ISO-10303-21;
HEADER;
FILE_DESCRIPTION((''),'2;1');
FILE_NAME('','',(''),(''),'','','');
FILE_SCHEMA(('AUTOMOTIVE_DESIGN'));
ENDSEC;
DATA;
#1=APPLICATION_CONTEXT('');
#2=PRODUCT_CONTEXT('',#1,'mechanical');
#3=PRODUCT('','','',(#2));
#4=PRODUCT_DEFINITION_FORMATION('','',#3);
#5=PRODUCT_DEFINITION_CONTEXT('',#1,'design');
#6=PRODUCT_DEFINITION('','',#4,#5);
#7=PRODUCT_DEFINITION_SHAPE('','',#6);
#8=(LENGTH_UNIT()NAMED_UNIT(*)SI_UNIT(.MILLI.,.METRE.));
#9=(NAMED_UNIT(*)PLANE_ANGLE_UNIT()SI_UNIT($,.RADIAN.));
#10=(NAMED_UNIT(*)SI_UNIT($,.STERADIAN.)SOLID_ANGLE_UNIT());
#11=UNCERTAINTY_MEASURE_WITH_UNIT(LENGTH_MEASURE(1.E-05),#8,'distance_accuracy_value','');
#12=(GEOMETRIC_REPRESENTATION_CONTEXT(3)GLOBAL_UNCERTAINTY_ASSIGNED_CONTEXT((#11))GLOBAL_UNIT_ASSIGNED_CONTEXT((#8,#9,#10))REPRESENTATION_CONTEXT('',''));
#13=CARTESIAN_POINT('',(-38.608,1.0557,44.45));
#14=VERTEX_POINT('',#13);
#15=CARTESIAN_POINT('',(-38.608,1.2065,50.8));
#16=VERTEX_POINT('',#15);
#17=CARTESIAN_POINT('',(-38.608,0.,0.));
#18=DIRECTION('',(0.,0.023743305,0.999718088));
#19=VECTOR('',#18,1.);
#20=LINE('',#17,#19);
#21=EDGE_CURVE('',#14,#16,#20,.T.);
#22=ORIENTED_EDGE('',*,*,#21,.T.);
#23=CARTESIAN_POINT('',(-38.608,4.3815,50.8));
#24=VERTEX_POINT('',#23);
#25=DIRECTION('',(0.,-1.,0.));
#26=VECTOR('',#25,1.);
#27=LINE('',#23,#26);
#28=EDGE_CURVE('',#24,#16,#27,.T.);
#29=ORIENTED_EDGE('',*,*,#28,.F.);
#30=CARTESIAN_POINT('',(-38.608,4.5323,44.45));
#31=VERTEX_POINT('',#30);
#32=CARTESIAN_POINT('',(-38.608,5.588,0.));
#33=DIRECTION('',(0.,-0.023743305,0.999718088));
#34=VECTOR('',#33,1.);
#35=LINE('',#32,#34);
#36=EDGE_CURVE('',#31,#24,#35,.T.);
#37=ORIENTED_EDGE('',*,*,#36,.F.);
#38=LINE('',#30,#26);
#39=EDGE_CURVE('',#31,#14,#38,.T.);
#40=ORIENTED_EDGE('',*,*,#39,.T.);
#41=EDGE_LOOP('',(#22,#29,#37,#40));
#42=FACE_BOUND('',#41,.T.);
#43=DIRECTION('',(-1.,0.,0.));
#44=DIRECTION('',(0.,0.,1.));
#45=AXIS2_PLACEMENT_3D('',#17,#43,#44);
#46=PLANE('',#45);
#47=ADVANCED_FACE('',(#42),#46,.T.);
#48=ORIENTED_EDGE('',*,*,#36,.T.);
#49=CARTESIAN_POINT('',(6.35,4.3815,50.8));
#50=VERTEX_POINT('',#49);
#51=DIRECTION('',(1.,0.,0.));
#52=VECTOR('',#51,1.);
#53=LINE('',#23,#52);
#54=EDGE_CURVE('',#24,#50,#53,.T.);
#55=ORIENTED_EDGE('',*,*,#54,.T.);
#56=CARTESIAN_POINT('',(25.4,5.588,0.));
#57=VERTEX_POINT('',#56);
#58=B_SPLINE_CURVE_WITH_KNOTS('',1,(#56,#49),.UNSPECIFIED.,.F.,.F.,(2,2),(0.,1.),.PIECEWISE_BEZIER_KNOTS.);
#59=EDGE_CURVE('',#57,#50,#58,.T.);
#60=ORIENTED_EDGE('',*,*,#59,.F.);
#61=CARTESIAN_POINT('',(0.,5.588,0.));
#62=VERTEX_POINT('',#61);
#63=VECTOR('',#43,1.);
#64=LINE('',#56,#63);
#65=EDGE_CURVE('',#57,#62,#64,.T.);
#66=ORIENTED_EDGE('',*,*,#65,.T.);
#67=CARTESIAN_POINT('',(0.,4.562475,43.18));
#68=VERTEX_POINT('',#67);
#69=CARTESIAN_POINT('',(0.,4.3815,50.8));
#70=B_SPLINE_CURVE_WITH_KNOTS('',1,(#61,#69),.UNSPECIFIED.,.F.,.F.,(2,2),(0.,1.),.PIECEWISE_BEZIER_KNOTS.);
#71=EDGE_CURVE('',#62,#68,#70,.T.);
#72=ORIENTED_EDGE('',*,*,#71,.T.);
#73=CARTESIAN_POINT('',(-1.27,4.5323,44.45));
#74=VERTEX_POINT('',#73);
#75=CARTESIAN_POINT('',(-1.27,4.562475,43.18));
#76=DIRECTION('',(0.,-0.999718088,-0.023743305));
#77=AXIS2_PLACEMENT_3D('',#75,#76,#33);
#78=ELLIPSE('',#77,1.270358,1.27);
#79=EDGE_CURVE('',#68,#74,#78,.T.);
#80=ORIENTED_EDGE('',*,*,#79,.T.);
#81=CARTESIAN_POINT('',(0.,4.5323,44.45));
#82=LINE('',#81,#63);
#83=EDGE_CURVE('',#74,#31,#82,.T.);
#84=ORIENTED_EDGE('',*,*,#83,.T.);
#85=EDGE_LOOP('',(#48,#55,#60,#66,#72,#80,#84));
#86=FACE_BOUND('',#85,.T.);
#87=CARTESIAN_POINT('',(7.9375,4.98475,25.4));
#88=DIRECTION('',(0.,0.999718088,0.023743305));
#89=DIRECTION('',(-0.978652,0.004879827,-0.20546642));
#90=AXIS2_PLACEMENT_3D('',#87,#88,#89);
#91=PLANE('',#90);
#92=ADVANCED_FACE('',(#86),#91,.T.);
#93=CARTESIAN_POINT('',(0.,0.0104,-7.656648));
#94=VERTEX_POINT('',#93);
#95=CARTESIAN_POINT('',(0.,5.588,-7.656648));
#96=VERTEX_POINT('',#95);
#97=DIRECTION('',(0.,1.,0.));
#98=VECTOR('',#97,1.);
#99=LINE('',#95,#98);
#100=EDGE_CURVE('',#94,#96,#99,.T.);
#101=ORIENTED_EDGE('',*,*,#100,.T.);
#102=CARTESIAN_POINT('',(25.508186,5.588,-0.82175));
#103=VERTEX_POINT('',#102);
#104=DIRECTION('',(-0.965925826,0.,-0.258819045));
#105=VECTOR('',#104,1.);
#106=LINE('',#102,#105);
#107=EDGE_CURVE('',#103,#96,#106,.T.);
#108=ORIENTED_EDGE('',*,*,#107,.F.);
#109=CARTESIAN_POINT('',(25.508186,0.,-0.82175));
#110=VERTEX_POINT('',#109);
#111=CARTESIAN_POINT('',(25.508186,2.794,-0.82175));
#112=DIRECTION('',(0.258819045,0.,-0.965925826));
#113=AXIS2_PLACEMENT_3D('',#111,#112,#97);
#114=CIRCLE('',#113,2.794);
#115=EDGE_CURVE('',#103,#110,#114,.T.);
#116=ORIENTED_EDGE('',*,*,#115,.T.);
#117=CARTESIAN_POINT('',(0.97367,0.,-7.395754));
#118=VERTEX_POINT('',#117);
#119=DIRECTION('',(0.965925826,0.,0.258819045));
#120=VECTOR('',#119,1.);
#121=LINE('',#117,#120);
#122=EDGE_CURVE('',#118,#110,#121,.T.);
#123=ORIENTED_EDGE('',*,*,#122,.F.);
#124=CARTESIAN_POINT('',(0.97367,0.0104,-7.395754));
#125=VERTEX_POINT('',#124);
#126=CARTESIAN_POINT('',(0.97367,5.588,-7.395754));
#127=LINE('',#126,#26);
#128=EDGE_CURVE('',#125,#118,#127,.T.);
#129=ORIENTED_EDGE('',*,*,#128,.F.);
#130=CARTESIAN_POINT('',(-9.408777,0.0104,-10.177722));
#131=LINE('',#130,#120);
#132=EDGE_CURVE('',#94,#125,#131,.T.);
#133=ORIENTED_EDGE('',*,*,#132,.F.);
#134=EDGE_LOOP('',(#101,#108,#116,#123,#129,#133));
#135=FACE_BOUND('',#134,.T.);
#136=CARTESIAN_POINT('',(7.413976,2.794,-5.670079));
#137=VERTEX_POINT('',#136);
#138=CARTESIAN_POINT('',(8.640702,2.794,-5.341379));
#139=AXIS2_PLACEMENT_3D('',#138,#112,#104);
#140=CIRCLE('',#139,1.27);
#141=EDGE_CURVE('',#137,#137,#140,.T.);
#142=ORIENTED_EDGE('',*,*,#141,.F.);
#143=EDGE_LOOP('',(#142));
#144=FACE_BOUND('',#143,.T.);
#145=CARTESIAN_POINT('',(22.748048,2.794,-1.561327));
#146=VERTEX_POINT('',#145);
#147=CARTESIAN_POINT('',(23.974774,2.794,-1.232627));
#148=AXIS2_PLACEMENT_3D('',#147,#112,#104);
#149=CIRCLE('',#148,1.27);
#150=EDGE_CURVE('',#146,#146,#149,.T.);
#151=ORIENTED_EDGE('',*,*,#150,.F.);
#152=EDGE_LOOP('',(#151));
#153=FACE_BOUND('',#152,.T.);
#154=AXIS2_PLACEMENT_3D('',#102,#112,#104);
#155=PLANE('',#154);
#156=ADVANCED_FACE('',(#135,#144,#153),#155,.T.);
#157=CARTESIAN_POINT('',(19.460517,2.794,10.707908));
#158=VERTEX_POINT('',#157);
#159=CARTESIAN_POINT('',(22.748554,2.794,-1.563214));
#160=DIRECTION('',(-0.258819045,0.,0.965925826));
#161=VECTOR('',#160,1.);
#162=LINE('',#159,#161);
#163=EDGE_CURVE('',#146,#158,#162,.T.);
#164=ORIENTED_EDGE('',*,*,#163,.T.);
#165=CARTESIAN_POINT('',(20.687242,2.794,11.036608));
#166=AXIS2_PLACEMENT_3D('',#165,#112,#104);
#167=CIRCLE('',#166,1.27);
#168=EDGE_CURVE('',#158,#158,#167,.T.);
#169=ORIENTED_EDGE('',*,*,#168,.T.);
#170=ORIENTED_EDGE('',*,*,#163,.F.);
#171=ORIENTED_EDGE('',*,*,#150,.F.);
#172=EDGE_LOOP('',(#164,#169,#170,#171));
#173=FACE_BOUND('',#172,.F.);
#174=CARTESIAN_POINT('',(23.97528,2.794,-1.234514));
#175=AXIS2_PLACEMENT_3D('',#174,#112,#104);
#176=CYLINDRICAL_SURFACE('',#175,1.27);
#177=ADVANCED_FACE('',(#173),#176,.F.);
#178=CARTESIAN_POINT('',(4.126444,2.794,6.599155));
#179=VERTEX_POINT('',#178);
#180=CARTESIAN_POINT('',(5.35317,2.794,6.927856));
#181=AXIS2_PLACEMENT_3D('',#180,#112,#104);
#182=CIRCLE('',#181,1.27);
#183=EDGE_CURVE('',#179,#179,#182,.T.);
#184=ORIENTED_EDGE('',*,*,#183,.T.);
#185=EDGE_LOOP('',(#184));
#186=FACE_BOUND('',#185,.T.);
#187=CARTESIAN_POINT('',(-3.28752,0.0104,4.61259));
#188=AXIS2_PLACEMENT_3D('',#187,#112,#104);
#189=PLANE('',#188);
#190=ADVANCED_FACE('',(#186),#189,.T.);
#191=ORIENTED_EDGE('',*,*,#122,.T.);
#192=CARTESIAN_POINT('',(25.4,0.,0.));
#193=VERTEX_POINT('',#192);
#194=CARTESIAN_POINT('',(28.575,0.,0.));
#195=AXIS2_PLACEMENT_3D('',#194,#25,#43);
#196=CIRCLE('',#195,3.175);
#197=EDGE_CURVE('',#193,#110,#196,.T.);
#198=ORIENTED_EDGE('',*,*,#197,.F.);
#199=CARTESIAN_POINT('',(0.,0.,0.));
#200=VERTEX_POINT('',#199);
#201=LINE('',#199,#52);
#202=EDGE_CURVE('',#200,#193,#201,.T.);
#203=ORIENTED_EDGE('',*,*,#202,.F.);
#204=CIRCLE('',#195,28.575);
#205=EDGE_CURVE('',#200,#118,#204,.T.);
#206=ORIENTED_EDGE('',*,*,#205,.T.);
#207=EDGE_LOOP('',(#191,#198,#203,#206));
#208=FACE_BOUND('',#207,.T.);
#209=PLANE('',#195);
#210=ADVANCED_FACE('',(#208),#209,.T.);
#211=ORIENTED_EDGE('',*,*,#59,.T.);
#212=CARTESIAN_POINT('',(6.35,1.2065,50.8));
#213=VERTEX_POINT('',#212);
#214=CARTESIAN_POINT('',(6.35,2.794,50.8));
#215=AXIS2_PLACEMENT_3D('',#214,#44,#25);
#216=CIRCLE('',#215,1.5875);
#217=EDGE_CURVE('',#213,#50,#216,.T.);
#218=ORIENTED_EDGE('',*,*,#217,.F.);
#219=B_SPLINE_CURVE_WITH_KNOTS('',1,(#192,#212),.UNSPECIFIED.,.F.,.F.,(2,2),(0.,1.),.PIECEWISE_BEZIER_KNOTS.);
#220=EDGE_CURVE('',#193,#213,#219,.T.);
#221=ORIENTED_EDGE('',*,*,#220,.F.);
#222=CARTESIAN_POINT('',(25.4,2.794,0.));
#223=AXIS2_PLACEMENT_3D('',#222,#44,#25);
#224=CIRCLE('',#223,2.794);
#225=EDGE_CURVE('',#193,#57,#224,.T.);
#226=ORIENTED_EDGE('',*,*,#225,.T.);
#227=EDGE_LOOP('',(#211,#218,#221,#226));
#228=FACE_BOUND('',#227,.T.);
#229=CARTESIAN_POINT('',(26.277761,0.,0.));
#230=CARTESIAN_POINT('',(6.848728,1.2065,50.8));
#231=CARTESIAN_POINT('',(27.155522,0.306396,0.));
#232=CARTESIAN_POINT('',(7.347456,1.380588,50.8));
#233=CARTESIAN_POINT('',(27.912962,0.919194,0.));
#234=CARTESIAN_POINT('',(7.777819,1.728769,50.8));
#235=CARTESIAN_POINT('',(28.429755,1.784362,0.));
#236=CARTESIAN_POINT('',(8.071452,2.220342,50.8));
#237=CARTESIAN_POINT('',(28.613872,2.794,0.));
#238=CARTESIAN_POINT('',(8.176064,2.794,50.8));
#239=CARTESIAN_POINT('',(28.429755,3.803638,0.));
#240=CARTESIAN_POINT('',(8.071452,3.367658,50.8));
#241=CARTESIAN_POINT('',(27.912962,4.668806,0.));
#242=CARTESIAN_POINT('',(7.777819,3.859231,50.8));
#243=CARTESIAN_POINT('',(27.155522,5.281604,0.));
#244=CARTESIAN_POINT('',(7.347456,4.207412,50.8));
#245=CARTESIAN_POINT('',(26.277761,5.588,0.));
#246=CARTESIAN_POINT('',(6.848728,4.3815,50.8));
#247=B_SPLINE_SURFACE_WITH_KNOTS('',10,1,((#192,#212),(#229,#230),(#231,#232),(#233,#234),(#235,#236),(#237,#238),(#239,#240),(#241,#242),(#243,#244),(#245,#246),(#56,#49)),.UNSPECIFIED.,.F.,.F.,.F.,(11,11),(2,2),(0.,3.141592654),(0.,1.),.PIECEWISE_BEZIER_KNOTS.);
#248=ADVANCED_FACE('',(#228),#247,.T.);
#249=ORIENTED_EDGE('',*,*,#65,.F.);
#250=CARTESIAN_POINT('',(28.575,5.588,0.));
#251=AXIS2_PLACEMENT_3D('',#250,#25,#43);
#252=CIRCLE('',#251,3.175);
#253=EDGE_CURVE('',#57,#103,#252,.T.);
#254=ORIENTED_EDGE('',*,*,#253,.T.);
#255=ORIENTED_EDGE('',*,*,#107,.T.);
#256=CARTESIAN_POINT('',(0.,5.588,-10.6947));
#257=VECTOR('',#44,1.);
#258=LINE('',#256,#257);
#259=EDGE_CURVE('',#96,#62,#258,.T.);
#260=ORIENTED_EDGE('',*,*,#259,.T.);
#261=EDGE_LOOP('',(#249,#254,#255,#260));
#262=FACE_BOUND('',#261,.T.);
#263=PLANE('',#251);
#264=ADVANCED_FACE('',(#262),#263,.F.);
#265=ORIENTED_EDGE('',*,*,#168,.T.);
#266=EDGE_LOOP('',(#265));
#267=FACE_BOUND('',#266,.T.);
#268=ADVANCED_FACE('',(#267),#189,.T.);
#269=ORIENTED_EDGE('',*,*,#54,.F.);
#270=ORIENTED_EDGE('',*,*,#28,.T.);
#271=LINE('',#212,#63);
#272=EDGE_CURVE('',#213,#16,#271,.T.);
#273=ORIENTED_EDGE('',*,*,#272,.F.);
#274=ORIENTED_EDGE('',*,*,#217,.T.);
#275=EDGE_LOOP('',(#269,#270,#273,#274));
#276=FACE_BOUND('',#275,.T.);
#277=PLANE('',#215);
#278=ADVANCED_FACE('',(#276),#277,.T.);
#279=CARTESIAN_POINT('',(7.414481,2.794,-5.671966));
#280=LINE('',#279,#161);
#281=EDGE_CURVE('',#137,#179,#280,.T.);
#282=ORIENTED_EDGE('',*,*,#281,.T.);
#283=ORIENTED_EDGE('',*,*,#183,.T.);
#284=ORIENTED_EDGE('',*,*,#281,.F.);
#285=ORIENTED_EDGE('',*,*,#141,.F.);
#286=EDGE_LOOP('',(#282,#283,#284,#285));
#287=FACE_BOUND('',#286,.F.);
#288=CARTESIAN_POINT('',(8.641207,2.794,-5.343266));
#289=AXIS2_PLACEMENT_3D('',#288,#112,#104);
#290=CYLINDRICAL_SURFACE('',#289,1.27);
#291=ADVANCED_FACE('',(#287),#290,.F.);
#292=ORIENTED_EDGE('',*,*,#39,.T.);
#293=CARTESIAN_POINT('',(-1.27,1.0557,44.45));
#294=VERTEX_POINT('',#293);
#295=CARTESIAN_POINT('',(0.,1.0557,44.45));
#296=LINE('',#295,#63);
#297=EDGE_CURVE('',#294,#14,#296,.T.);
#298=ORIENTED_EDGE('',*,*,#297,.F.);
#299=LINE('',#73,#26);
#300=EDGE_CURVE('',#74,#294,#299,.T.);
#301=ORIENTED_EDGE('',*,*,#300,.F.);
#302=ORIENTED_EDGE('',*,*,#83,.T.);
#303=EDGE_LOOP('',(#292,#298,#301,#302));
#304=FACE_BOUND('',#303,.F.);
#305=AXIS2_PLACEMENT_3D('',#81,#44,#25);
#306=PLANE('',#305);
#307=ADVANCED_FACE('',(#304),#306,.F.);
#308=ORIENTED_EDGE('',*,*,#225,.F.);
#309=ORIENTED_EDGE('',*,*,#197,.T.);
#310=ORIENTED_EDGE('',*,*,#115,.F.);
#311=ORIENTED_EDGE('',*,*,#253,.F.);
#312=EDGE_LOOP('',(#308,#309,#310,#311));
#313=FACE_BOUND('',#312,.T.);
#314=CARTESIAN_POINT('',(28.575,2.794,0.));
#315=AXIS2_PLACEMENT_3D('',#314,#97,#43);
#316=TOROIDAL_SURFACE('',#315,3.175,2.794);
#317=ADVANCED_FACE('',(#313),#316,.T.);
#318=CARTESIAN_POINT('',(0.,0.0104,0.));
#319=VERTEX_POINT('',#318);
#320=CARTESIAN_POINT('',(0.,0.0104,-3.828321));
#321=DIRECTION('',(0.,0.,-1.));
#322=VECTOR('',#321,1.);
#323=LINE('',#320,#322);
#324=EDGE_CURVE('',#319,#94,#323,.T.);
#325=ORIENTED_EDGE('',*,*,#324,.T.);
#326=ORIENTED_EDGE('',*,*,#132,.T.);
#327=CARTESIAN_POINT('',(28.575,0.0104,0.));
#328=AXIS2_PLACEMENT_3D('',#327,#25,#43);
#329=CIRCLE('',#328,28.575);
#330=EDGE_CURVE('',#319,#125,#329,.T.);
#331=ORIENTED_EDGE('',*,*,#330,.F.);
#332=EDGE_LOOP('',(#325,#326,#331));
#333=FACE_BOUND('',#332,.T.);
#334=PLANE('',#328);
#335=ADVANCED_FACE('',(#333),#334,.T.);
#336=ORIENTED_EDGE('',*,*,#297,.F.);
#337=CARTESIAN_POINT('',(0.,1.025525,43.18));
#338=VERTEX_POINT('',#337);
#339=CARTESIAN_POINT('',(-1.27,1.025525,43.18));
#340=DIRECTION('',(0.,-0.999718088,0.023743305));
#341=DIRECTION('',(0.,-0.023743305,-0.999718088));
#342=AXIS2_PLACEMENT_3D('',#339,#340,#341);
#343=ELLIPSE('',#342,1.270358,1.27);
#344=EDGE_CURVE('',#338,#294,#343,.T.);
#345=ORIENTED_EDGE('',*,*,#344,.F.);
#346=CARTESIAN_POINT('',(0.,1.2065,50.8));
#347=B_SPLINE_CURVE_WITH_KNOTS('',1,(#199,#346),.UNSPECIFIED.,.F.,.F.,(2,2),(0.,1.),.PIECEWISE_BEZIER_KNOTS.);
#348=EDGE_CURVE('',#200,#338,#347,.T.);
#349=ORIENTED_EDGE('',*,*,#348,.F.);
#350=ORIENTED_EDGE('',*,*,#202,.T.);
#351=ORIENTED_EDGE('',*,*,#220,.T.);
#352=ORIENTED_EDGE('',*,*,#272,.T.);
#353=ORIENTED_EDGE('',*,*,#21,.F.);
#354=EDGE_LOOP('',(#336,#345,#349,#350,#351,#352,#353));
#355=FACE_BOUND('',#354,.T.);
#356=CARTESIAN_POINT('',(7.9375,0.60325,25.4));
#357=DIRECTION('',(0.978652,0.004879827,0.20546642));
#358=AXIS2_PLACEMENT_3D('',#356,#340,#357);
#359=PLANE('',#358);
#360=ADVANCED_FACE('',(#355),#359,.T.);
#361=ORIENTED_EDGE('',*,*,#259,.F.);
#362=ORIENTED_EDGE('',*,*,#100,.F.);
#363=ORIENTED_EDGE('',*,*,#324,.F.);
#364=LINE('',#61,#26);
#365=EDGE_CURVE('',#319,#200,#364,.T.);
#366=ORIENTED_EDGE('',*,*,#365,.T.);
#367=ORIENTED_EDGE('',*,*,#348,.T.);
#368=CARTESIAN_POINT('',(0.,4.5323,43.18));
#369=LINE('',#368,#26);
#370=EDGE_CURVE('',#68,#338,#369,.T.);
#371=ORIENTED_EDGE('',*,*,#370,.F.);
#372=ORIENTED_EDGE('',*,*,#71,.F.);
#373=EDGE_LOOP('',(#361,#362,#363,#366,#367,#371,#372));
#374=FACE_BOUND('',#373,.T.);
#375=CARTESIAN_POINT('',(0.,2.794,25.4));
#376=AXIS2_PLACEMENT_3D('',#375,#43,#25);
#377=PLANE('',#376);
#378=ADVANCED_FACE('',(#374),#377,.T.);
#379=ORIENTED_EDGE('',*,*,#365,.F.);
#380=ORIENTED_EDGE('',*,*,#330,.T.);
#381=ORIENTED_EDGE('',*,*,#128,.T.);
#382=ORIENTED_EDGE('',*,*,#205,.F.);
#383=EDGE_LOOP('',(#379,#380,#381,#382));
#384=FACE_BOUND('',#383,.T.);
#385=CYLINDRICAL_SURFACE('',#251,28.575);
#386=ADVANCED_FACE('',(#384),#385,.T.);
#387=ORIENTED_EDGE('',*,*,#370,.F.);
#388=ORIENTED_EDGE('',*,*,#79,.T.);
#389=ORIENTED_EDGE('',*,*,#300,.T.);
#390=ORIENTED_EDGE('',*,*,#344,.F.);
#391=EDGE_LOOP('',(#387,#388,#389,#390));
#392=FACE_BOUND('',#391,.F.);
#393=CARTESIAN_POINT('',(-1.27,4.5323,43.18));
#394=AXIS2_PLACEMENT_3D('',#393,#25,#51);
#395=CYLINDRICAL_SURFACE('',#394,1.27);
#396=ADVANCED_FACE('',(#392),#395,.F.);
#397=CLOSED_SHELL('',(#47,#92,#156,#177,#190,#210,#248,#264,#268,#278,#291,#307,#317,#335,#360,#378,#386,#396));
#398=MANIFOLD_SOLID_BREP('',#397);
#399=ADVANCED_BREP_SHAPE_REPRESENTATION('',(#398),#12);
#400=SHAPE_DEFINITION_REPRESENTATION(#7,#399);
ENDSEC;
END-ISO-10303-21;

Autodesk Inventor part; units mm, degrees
ref_plane "YZ Plane" through (0, 0, 0) normal (1, 0, 0) x (0, 1, 0)
ref_plane "XZ Plane" through (0, 0, 0) normal (0, 1, 0) x (-1, 0, 0)
sketch "Sketch2" plane through (0, 0, 0) normal (0, 0, 1) x (1, 0, 0)
  line L0 (0, 0) -> (25.4, 0)
  line L1 (25.4, 0) -> (25.4, 5.588)
  line L2 (25.4, 5.588) -> (0, 5.588)
  line L3 (0, 5.588) -> (0, 0)
  arc A0 (25.4, 0) -> (25.4, 5.588) centre (25.4, 2.794) ccw
  dimension "d0" = 25.4
  dimension "d1" = 5.588
ref_plane "Work Plane1" through (0, 0, 50.8) normal (0, 0, 1) x (1, 0, 0)
sketch "Sketch3" plane through (0, 0, 50.8) normal (0, 0, 1) x (1, 0, 0)
  line L0 (0, 1.2065) -> (6.35, 1.2065)
  line L1 (6.35, 1.2065) -> (6.35, 4.3815)
  line L2 (6.35, 4.3815) -> (0, 4.3815)
  line L3 (0, 4.3815) -> (0, 1.2065)
  arc A0 (6.35, 1.2065) -> (6.35, 4.3815) centre (6.35, 2.794) ccw
  point P0 (0, 0)
  dimension "d3" = 6.35
  dimension "d4" = 3.175
  dimension "d5" = 1.2065
loft "Loft1" add profiles "Sketch2", "Sketch3"
sketch "Sketch4" plane through (0, 0, 0) normal (-1, 0, 0) x (0, 0, 1)
  line L0 (0, 5.588) -> (0, 0) projected
  line L1 (0, 0) -> (50.8, 1.2065) projected
  line L2 (50.8, 4.3815) -> (50.8, 1.2065) projected
  line L3 (0, 5.588) -> (50.8, 4.3815) projected
  line L4 (0, 5.588) -> (50.8, 4.3815) projected
  line L5 (44.45, 4.5323) -> (44.45, 1.0557)
  line L6 (50.8, 1.2065) -> (0, 0) projected
  dimension "d10" = 6.35
extrude "Extrusion1" add sketch "Sketch4" along normal blind 38.608 contours L3 L2 L1 L5
sketch "Sketch5" plane through (25.4, 5.588, 0) normal (0, 0, -1) x (-1, 0, 0)
  line L0 (25.4, 0) -> (25.4, -5.588) projected
  line L1 (0, 0) -> (25.4, 0) projected
  arc A0 (0, 0) -> (0, -5.588) centre (0, -2.794) ccw projected
  line L2 (25.4, -5.588) -> (0, -5.588) projected
  line L3 (25.4, 0) -> (25.4, -5.588) projected
  line L4 (25.4, 0) -> (36.1487, 0)
  line L5 (36.1487, 0) -> (36.1487, -5.5776)
  line L6 (36.1487, -5.5776) -> (25.4, -5.5776)
  line L7 (25.4, -5.5776) -> (25.4, 0)
  line L8 (-3.175, -0.1076) -> (-3.175, -7.007)
  line L9 (25.4, -5.588) -> (0, -5.588) projected
revolve "Revolution1" add sketch "Sketch5" angle 15 about axis through (28.575, 5.4804, 0) along (0, -1, 0)
sketch "Sketch7" plane through (-10.7487, 5.588, 0) normal (0, 1, 0) x (1, 0, 0)
  line L0 (0, 0) -> (10.7487, 0) projected
  line L1 (36.1487, 0) -> (10.7487, 0) projected
  arc A0 (36.2569, 0.8218) -> (36.1487, 0) centre (39.3237, 0) ccw projected
  line L2 (1.3399, 10.1777) -> (36.2569, 0.8218) projected
  arc A1 (1.3399, 10.1777) -> (0, 0) centre (39.3237, 0) ccw projected
  line L3 (10.7487, 0) -> (10.7487, -44.45) projected
  line L4 (10.7487, 0) -> (-2.0556, 0)
  line L5 (-2.0556, 0) -> (-2.0556, 10.6947)
  line L6 (-2.0556, 10.6947) -> (10.7487, 10.6947)
  line L7 (10.7487, 10.6947) -> (10.7487, 0)
extrude "Extrusion2" cut sketch "Sketch7" against normal blind 38.1 contours A1 L2 L7 L0 | L4 L5 L6 L7 L2 A1
sketch "Sketch8" plane through (0, 0.0104, -7.6566) normal (0.258819, 0, -0.9659258) x (-0.9659258, 0, -0.258819)
  line L0 (-29.583, 2.7836) -> (-24.8205, 2.7836)
  line L1 (-24.8205, 2.7836) -> (-8.9455, 2.7836)
  circle A0 centre (-24.8205, 2.7836) radius 1.27
  circle A1 centre (-8.9455, 2.7836) radius 1.27
  line L2 (-26.408, -0.0104) -> (0, -0.0104) projected
  point P0 (-1.9817, -0.0104)
  point P1 (0, 0)
  dimension "d17" = 4.7625
  dimension "d18" = 15.875
  dimension "d19" = 2.54
  dimension "d20" = 2.54
  dimension "d23" = 2.794
extrude "Extrusion4" cut sketch "Sketch8" against normal blind 12.7
fillet "Fillet2" radius 1.27 1 edges at (0, 2.794, 44.45)
properties part number "DivePlanesStabilizingFins"
